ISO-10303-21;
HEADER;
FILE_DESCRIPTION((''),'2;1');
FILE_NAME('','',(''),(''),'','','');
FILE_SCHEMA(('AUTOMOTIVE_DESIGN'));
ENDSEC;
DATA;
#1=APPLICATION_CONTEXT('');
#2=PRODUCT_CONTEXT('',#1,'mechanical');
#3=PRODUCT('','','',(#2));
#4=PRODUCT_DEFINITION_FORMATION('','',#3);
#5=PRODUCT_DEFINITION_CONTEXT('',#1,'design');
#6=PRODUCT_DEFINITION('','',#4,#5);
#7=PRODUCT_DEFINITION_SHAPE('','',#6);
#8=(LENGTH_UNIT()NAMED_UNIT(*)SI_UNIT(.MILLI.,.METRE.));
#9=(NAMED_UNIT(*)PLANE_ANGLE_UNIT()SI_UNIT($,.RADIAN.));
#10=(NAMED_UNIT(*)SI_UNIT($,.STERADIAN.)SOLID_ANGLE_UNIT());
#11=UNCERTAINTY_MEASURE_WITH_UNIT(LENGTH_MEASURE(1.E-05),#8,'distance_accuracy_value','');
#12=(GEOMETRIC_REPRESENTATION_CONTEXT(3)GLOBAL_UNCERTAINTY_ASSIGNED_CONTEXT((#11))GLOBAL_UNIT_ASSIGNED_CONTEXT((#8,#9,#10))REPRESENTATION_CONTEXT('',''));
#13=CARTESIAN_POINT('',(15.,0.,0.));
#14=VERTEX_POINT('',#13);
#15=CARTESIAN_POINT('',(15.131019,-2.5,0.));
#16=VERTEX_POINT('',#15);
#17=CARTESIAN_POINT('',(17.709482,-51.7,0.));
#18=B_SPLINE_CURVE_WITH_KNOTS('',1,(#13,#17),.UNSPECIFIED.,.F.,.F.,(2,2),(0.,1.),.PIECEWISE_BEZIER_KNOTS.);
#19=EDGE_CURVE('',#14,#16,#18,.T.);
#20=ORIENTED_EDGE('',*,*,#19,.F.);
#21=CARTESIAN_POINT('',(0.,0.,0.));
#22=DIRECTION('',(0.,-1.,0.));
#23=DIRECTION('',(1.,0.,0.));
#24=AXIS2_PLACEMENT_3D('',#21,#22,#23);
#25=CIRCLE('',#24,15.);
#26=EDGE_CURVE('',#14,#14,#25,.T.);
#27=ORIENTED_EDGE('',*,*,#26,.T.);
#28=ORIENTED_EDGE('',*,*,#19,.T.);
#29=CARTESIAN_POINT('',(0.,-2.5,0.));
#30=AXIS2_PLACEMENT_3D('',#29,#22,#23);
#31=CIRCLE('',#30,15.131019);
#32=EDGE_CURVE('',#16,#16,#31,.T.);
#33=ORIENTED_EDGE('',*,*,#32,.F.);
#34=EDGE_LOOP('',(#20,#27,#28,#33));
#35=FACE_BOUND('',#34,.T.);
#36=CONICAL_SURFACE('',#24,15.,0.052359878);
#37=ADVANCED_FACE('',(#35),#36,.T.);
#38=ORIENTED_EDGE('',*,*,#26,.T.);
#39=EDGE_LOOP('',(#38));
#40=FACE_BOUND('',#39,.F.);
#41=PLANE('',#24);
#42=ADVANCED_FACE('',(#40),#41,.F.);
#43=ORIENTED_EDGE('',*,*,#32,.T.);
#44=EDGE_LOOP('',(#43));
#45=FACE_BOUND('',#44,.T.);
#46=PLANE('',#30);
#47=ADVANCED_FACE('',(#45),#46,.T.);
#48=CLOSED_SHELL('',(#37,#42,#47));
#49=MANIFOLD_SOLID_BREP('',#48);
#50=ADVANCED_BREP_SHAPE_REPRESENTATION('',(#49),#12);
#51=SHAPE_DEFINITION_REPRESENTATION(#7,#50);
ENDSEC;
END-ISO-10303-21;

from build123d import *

# Parameters (mm, degrees)
F0_R     = 15
F1_DEPTH = 51.7
F1_TAPER = -3
F2_T     = -2.5


with BuildPart() as f1:
    # F0 (on Front) → F1 (new body)
    with BuildSketch(Plane.XZ):
        Circle(F0_R)
    extrude(amount=F1_DEPTH, taper=F1_TAPER)

    # F2
    f2_openings = [f1.faces().sort_by_distance(p)[0] for p in [
        (0, -51.7, 0),
        (-16.354741, -25.85, 0),
    ]]
    offset(amount=F2_T, openings=f2_openings)


solid = f1.part
